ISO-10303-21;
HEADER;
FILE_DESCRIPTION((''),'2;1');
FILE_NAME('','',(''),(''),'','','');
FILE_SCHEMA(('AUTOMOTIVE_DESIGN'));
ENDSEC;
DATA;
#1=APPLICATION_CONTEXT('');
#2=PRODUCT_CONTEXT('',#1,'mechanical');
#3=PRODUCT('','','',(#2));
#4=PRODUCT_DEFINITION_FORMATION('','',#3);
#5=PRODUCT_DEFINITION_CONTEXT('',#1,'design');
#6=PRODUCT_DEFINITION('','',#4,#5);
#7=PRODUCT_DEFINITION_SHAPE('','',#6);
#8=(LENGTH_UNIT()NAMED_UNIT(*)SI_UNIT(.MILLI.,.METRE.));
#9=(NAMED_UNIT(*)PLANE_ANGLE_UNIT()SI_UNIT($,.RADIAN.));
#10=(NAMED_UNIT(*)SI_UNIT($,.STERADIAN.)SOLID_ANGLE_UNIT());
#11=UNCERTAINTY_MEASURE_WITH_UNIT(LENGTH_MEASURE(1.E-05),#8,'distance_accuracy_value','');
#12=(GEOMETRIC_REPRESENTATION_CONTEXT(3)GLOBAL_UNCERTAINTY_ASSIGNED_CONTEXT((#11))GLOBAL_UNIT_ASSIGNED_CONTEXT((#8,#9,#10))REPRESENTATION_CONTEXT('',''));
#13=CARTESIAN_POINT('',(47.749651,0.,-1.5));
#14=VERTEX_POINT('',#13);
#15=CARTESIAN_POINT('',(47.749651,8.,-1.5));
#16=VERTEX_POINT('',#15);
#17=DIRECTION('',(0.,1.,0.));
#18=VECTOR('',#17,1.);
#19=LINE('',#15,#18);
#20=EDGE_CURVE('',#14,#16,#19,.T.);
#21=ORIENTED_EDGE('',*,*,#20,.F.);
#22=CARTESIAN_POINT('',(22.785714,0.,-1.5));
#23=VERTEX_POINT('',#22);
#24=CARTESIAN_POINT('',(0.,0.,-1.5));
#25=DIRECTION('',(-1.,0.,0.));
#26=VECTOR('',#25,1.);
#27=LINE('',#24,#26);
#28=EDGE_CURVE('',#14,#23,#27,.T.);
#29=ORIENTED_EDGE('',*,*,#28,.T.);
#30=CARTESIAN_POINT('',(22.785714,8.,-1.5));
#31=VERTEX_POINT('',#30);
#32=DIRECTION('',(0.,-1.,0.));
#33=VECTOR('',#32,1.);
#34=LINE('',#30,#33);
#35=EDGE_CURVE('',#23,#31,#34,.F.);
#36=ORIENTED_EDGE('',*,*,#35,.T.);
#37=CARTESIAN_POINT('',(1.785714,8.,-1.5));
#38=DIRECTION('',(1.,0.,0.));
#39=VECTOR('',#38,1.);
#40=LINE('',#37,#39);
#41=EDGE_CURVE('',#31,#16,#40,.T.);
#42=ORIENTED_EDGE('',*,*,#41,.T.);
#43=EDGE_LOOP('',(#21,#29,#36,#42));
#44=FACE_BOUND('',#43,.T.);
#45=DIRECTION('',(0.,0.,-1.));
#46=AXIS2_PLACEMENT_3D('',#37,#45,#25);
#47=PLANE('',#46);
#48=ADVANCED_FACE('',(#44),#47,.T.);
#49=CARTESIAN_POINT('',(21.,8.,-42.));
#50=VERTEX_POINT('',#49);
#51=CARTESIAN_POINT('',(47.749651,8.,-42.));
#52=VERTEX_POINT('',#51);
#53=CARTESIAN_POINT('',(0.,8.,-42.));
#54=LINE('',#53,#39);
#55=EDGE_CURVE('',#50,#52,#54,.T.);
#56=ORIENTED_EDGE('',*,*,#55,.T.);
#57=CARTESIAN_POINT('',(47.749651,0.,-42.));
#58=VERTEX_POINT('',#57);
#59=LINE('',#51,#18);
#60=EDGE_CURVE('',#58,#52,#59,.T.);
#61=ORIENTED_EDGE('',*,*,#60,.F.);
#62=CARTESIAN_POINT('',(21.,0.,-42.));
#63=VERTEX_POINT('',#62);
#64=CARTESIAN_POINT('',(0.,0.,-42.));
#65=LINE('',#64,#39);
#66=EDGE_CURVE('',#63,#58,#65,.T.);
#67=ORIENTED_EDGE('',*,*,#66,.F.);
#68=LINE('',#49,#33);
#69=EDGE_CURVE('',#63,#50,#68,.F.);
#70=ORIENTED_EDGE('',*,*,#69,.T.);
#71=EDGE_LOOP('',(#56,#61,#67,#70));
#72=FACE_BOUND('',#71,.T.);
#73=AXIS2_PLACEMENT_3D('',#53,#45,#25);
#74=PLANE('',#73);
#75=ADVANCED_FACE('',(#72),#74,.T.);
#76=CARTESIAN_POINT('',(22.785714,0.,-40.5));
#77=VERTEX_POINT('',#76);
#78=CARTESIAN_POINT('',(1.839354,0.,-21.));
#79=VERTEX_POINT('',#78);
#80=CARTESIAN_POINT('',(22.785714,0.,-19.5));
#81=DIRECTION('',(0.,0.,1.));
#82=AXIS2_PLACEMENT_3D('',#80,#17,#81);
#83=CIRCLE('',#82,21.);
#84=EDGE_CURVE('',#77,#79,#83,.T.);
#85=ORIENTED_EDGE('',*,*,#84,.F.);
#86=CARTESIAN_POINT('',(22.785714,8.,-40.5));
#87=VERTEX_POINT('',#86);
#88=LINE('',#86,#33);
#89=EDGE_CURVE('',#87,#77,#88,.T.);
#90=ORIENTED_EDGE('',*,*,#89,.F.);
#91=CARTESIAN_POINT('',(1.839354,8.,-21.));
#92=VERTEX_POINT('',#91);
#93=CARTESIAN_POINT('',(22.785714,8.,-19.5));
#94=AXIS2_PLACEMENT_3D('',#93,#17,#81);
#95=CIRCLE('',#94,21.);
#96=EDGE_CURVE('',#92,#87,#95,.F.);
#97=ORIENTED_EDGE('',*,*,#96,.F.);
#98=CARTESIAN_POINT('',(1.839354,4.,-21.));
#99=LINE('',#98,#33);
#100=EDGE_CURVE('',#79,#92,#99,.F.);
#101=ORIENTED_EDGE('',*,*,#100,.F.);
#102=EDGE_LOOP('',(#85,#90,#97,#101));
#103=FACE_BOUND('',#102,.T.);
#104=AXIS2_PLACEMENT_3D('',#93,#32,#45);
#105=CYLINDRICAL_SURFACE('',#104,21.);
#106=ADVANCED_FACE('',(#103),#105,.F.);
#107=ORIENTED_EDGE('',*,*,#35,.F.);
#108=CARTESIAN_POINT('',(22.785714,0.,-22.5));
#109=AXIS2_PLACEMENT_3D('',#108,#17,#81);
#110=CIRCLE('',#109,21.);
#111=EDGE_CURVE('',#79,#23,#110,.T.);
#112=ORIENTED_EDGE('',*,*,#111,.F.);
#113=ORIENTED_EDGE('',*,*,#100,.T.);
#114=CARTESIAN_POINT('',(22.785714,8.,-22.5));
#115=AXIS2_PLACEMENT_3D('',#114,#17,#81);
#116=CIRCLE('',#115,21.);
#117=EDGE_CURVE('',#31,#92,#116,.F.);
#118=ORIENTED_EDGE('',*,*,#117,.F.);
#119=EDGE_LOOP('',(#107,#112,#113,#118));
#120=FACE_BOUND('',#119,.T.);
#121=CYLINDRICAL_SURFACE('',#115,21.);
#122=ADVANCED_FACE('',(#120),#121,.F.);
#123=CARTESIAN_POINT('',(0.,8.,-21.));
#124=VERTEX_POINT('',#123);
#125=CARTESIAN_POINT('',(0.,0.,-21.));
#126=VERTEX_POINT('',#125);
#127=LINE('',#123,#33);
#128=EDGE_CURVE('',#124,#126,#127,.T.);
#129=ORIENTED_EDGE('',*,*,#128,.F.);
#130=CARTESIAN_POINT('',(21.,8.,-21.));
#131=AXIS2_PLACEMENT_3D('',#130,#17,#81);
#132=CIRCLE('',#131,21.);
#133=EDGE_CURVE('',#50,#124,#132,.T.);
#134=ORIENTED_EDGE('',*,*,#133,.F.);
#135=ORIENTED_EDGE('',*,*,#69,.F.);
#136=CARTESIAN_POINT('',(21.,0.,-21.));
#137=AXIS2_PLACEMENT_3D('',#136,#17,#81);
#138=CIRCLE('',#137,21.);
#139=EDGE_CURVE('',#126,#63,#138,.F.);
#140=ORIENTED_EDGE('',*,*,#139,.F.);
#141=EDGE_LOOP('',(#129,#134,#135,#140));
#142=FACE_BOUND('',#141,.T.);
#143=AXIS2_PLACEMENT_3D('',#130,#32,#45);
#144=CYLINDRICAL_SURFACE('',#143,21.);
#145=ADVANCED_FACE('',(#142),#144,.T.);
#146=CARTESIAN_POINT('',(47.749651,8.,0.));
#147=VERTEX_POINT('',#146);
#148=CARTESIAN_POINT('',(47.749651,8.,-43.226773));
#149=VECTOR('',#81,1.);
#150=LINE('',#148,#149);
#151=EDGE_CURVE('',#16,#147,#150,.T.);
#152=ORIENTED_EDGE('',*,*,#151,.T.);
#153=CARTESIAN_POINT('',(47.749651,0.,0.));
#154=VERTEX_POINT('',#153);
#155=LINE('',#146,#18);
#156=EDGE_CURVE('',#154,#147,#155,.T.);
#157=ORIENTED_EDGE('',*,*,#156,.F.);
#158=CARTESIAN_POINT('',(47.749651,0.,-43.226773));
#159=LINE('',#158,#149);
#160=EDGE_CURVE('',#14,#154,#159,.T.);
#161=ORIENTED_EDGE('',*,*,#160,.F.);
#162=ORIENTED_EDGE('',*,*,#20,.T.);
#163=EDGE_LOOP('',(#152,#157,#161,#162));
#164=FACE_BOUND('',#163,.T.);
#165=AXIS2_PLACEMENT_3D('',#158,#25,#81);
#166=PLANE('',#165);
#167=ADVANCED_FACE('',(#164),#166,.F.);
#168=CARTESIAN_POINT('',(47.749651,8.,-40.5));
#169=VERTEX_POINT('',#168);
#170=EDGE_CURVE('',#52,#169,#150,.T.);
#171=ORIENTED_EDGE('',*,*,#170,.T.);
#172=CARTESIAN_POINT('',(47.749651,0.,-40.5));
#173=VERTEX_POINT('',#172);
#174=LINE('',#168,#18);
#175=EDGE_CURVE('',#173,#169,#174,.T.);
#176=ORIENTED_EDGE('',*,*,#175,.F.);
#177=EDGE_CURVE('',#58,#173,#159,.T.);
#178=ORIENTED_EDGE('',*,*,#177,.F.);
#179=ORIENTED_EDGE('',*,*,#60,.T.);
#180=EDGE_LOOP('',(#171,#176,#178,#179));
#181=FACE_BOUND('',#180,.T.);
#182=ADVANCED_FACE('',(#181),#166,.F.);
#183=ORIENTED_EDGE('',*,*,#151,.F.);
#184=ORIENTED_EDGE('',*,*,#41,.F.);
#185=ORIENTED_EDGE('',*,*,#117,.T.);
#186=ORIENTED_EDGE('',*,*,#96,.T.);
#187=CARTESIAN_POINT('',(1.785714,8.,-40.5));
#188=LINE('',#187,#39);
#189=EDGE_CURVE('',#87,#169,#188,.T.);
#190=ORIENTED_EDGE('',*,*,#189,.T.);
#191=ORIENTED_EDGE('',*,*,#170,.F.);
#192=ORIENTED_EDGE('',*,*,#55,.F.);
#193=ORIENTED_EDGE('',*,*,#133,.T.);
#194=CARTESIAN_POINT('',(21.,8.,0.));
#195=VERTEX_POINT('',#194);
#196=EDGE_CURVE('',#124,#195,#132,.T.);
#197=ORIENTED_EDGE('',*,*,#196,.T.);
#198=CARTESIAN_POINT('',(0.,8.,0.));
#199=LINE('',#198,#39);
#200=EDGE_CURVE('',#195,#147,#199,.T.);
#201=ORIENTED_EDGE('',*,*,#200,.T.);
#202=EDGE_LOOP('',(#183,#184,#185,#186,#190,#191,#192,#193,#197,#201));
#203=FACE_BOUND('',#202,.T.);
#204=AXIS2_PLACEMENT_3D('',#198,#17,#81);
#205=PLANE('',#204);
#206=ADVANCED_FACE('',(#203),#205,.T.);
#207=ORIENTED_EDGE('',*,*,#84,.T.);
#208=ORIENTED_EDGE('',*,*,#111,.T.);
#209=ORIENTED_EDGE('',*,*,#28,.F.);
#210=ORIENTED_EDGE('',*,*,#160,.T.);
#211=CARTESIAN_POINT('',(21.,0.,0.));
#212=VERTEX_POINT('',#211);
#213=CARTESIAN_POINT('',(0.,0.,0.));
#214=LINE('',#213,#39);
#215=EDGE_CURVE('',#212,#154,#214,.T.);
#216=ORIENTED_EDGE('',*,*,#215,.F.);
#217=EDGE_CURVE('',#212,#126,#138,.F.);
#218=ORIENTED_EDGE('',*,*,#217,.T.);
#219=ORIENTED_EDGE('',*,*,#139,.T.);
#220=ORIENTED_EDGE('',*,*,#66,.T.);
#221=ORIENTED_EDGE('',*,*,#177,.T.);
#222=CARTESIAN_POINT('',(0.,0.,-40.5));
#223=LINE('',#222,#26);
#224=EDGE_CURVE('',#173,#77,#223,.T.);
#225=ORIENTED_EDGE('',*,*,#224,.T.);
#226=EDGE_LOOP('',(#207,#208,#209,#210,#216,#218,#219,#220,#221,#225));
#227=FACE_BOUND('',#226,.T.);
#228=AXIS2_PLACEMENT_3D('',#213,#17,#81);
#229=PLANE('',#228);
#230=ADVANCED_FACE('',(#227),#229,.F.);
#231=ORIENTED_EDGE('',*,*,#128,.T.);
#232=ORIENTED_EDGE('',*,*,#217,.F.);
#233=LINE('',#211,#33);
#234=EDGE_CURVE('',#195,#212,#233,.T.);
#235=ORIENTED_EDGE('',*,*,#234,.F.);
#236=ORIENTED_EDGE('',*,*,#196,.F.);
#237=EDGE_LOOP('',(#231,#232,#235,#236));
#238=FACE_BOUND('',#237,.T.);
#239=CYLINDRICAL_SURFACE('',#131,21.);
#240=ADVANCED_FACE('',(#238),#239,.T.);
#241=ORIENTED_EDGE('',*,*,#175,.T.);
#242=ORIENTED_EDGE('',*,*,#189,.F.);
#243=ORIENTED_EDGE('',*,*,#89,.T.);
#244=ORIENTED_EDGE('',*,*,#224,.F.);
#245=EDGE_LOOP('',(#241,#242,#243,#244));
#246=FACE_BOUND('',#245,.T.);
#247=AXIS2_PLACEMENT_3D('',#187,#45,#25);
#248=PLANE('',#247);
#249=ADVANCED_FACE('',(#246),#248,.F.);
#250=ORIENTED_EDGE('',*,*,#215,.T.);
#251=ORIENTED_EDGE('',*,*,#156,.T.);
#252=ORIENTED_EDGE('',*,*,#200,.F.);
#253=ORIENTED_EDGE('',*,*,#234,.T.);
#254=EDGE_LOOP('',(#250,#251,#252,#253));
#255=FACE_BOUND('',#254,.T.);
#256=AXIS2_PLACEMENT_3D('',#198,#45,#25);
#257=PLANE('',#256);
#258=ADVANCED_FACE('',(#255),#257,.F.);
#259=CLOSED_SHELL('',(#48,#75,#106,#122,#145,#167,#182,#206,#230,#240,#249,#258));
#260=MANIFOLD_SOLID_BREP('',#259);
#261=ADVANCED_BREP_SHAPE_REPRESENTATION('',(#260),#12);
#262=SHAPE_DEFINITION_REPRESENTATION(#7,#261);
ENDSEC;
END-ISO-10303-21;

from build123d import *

# Parameters (mm, degrees)
CROQUIS3_W                 = 50
CROQUIS3_H                 = 42
SALIENTE_EXTRUIR7_DEPTH    = 8
CORTAR_EXTRUIR2_DEPTH      = 8
CORTAR_EXTRUIR2_DEPTH_BACK = 8
CROQUIS3_13_W              = 46.428571428
CROQUIS3_13_H              = 39
REDONDEO3_R                = 21
CROQUIS7_W                 = 3.39365255
CROQUIS7_H                 = 46.015277421
CORTAR_EXTRUIR3_DEPTH      = 8


with BuildPart() as part:
    # Croquis3 → Saliente-Extruir7 (new body)
    with BuildSketch(Plane(origin=(0, 0, 0), x_dir=(1, 0, 0), z_dir=(0, 1, 0))):
        with Locations((25, 21)):
            Rectangle(CROQUIS3_W, CROQUIS3_H)
    extrude(amount=SALIENTE_EXTRUIR7_DEPTH)

    # Croquis3<13> → Cortar-Extruir2 (cut, two sides: drawn at the far end of the back side and taken through both)
    with BuildSketch(Plane(origin=(0, 0, 0), x_dir=(1, 0, 0), z_dir=(0, 1, 0)).offset(-CORTAR_EXTRUIR2_DEPTH_BACK)):
        with Locations((25, 21)):
            Rectangle(CROQUIS3_13_W, CROQUIS3_13_H)
    extrude(amount=CORTAR_EXTRUIR2_DEPTH + CORTAR_EXTRUIR2_DEPTH_BACK, mode=Mode.SUBTRACT)

    # Redondeo3
    # the kernel refuses this fillet: 21 mm, written as the material it adds along each edge
    with BuildSketch(Plane(origin=(1.785714286, 0, -1.5), x_dir=(0, 0, -1), z_dir=(0, 1, 0)), Plane(origin=(1.785714286, 0, -40.5), x_dir=(1, 0, 0), z_dir=(0, 1, 0))) as redondeo3_piece_1:
        with BuildLine():
            CenterArc((REDONDEO3_R, -REDONDEO3_R), REDONDEO3_R, 90, 90)
            Line((0, -REDONDEO3_R), (0, 0))
            Line((0, 0), (REDONDEO3_R, 0))
        make_face()
    extrude(amount=8)
    # the kernel refuses this fillet: 21 mm, written as the material it takes off along each edge
    with BuildSketch(Plane(origin=(0, -52.5, 0), x_dir=(1, 0, 0), z_dir=(0, 1, 0)), Plane(origin=(0, -52.5, -42), x_dir=(0, 0, 1), z_dir=(0, 1, 0))) as redondeo3_2_piece_1:
        with BuildLine():
            CenterArc((REDONDEO3_R, REDONDEO3_R), REDONDEO3_R, 180, 90)
            Line((0, REDONDEO3_R), (0, 0))
            Line((0, 0), (REDONDEO3_R, 0))
        make_face()
    extrude(amount=113, mode=Mode.SUBTRACT)

    # Croquis7 → Cortar-Extruir3 (cut)
    with BuildSketch(Plane(origin=(0, 8, 0), x_dir=(1, 0, 0), z_dir=(0, 1, 0))):
        with Locations((49.446476979, 20.219134687)):
            Rectangle(CROQUIS7_W, CROQUIS7_H)
    extrude(amount=-CORTAR_EXTRUIR3_DEPTH, mode=Mode.SUBTRACT)


solid = part.part
